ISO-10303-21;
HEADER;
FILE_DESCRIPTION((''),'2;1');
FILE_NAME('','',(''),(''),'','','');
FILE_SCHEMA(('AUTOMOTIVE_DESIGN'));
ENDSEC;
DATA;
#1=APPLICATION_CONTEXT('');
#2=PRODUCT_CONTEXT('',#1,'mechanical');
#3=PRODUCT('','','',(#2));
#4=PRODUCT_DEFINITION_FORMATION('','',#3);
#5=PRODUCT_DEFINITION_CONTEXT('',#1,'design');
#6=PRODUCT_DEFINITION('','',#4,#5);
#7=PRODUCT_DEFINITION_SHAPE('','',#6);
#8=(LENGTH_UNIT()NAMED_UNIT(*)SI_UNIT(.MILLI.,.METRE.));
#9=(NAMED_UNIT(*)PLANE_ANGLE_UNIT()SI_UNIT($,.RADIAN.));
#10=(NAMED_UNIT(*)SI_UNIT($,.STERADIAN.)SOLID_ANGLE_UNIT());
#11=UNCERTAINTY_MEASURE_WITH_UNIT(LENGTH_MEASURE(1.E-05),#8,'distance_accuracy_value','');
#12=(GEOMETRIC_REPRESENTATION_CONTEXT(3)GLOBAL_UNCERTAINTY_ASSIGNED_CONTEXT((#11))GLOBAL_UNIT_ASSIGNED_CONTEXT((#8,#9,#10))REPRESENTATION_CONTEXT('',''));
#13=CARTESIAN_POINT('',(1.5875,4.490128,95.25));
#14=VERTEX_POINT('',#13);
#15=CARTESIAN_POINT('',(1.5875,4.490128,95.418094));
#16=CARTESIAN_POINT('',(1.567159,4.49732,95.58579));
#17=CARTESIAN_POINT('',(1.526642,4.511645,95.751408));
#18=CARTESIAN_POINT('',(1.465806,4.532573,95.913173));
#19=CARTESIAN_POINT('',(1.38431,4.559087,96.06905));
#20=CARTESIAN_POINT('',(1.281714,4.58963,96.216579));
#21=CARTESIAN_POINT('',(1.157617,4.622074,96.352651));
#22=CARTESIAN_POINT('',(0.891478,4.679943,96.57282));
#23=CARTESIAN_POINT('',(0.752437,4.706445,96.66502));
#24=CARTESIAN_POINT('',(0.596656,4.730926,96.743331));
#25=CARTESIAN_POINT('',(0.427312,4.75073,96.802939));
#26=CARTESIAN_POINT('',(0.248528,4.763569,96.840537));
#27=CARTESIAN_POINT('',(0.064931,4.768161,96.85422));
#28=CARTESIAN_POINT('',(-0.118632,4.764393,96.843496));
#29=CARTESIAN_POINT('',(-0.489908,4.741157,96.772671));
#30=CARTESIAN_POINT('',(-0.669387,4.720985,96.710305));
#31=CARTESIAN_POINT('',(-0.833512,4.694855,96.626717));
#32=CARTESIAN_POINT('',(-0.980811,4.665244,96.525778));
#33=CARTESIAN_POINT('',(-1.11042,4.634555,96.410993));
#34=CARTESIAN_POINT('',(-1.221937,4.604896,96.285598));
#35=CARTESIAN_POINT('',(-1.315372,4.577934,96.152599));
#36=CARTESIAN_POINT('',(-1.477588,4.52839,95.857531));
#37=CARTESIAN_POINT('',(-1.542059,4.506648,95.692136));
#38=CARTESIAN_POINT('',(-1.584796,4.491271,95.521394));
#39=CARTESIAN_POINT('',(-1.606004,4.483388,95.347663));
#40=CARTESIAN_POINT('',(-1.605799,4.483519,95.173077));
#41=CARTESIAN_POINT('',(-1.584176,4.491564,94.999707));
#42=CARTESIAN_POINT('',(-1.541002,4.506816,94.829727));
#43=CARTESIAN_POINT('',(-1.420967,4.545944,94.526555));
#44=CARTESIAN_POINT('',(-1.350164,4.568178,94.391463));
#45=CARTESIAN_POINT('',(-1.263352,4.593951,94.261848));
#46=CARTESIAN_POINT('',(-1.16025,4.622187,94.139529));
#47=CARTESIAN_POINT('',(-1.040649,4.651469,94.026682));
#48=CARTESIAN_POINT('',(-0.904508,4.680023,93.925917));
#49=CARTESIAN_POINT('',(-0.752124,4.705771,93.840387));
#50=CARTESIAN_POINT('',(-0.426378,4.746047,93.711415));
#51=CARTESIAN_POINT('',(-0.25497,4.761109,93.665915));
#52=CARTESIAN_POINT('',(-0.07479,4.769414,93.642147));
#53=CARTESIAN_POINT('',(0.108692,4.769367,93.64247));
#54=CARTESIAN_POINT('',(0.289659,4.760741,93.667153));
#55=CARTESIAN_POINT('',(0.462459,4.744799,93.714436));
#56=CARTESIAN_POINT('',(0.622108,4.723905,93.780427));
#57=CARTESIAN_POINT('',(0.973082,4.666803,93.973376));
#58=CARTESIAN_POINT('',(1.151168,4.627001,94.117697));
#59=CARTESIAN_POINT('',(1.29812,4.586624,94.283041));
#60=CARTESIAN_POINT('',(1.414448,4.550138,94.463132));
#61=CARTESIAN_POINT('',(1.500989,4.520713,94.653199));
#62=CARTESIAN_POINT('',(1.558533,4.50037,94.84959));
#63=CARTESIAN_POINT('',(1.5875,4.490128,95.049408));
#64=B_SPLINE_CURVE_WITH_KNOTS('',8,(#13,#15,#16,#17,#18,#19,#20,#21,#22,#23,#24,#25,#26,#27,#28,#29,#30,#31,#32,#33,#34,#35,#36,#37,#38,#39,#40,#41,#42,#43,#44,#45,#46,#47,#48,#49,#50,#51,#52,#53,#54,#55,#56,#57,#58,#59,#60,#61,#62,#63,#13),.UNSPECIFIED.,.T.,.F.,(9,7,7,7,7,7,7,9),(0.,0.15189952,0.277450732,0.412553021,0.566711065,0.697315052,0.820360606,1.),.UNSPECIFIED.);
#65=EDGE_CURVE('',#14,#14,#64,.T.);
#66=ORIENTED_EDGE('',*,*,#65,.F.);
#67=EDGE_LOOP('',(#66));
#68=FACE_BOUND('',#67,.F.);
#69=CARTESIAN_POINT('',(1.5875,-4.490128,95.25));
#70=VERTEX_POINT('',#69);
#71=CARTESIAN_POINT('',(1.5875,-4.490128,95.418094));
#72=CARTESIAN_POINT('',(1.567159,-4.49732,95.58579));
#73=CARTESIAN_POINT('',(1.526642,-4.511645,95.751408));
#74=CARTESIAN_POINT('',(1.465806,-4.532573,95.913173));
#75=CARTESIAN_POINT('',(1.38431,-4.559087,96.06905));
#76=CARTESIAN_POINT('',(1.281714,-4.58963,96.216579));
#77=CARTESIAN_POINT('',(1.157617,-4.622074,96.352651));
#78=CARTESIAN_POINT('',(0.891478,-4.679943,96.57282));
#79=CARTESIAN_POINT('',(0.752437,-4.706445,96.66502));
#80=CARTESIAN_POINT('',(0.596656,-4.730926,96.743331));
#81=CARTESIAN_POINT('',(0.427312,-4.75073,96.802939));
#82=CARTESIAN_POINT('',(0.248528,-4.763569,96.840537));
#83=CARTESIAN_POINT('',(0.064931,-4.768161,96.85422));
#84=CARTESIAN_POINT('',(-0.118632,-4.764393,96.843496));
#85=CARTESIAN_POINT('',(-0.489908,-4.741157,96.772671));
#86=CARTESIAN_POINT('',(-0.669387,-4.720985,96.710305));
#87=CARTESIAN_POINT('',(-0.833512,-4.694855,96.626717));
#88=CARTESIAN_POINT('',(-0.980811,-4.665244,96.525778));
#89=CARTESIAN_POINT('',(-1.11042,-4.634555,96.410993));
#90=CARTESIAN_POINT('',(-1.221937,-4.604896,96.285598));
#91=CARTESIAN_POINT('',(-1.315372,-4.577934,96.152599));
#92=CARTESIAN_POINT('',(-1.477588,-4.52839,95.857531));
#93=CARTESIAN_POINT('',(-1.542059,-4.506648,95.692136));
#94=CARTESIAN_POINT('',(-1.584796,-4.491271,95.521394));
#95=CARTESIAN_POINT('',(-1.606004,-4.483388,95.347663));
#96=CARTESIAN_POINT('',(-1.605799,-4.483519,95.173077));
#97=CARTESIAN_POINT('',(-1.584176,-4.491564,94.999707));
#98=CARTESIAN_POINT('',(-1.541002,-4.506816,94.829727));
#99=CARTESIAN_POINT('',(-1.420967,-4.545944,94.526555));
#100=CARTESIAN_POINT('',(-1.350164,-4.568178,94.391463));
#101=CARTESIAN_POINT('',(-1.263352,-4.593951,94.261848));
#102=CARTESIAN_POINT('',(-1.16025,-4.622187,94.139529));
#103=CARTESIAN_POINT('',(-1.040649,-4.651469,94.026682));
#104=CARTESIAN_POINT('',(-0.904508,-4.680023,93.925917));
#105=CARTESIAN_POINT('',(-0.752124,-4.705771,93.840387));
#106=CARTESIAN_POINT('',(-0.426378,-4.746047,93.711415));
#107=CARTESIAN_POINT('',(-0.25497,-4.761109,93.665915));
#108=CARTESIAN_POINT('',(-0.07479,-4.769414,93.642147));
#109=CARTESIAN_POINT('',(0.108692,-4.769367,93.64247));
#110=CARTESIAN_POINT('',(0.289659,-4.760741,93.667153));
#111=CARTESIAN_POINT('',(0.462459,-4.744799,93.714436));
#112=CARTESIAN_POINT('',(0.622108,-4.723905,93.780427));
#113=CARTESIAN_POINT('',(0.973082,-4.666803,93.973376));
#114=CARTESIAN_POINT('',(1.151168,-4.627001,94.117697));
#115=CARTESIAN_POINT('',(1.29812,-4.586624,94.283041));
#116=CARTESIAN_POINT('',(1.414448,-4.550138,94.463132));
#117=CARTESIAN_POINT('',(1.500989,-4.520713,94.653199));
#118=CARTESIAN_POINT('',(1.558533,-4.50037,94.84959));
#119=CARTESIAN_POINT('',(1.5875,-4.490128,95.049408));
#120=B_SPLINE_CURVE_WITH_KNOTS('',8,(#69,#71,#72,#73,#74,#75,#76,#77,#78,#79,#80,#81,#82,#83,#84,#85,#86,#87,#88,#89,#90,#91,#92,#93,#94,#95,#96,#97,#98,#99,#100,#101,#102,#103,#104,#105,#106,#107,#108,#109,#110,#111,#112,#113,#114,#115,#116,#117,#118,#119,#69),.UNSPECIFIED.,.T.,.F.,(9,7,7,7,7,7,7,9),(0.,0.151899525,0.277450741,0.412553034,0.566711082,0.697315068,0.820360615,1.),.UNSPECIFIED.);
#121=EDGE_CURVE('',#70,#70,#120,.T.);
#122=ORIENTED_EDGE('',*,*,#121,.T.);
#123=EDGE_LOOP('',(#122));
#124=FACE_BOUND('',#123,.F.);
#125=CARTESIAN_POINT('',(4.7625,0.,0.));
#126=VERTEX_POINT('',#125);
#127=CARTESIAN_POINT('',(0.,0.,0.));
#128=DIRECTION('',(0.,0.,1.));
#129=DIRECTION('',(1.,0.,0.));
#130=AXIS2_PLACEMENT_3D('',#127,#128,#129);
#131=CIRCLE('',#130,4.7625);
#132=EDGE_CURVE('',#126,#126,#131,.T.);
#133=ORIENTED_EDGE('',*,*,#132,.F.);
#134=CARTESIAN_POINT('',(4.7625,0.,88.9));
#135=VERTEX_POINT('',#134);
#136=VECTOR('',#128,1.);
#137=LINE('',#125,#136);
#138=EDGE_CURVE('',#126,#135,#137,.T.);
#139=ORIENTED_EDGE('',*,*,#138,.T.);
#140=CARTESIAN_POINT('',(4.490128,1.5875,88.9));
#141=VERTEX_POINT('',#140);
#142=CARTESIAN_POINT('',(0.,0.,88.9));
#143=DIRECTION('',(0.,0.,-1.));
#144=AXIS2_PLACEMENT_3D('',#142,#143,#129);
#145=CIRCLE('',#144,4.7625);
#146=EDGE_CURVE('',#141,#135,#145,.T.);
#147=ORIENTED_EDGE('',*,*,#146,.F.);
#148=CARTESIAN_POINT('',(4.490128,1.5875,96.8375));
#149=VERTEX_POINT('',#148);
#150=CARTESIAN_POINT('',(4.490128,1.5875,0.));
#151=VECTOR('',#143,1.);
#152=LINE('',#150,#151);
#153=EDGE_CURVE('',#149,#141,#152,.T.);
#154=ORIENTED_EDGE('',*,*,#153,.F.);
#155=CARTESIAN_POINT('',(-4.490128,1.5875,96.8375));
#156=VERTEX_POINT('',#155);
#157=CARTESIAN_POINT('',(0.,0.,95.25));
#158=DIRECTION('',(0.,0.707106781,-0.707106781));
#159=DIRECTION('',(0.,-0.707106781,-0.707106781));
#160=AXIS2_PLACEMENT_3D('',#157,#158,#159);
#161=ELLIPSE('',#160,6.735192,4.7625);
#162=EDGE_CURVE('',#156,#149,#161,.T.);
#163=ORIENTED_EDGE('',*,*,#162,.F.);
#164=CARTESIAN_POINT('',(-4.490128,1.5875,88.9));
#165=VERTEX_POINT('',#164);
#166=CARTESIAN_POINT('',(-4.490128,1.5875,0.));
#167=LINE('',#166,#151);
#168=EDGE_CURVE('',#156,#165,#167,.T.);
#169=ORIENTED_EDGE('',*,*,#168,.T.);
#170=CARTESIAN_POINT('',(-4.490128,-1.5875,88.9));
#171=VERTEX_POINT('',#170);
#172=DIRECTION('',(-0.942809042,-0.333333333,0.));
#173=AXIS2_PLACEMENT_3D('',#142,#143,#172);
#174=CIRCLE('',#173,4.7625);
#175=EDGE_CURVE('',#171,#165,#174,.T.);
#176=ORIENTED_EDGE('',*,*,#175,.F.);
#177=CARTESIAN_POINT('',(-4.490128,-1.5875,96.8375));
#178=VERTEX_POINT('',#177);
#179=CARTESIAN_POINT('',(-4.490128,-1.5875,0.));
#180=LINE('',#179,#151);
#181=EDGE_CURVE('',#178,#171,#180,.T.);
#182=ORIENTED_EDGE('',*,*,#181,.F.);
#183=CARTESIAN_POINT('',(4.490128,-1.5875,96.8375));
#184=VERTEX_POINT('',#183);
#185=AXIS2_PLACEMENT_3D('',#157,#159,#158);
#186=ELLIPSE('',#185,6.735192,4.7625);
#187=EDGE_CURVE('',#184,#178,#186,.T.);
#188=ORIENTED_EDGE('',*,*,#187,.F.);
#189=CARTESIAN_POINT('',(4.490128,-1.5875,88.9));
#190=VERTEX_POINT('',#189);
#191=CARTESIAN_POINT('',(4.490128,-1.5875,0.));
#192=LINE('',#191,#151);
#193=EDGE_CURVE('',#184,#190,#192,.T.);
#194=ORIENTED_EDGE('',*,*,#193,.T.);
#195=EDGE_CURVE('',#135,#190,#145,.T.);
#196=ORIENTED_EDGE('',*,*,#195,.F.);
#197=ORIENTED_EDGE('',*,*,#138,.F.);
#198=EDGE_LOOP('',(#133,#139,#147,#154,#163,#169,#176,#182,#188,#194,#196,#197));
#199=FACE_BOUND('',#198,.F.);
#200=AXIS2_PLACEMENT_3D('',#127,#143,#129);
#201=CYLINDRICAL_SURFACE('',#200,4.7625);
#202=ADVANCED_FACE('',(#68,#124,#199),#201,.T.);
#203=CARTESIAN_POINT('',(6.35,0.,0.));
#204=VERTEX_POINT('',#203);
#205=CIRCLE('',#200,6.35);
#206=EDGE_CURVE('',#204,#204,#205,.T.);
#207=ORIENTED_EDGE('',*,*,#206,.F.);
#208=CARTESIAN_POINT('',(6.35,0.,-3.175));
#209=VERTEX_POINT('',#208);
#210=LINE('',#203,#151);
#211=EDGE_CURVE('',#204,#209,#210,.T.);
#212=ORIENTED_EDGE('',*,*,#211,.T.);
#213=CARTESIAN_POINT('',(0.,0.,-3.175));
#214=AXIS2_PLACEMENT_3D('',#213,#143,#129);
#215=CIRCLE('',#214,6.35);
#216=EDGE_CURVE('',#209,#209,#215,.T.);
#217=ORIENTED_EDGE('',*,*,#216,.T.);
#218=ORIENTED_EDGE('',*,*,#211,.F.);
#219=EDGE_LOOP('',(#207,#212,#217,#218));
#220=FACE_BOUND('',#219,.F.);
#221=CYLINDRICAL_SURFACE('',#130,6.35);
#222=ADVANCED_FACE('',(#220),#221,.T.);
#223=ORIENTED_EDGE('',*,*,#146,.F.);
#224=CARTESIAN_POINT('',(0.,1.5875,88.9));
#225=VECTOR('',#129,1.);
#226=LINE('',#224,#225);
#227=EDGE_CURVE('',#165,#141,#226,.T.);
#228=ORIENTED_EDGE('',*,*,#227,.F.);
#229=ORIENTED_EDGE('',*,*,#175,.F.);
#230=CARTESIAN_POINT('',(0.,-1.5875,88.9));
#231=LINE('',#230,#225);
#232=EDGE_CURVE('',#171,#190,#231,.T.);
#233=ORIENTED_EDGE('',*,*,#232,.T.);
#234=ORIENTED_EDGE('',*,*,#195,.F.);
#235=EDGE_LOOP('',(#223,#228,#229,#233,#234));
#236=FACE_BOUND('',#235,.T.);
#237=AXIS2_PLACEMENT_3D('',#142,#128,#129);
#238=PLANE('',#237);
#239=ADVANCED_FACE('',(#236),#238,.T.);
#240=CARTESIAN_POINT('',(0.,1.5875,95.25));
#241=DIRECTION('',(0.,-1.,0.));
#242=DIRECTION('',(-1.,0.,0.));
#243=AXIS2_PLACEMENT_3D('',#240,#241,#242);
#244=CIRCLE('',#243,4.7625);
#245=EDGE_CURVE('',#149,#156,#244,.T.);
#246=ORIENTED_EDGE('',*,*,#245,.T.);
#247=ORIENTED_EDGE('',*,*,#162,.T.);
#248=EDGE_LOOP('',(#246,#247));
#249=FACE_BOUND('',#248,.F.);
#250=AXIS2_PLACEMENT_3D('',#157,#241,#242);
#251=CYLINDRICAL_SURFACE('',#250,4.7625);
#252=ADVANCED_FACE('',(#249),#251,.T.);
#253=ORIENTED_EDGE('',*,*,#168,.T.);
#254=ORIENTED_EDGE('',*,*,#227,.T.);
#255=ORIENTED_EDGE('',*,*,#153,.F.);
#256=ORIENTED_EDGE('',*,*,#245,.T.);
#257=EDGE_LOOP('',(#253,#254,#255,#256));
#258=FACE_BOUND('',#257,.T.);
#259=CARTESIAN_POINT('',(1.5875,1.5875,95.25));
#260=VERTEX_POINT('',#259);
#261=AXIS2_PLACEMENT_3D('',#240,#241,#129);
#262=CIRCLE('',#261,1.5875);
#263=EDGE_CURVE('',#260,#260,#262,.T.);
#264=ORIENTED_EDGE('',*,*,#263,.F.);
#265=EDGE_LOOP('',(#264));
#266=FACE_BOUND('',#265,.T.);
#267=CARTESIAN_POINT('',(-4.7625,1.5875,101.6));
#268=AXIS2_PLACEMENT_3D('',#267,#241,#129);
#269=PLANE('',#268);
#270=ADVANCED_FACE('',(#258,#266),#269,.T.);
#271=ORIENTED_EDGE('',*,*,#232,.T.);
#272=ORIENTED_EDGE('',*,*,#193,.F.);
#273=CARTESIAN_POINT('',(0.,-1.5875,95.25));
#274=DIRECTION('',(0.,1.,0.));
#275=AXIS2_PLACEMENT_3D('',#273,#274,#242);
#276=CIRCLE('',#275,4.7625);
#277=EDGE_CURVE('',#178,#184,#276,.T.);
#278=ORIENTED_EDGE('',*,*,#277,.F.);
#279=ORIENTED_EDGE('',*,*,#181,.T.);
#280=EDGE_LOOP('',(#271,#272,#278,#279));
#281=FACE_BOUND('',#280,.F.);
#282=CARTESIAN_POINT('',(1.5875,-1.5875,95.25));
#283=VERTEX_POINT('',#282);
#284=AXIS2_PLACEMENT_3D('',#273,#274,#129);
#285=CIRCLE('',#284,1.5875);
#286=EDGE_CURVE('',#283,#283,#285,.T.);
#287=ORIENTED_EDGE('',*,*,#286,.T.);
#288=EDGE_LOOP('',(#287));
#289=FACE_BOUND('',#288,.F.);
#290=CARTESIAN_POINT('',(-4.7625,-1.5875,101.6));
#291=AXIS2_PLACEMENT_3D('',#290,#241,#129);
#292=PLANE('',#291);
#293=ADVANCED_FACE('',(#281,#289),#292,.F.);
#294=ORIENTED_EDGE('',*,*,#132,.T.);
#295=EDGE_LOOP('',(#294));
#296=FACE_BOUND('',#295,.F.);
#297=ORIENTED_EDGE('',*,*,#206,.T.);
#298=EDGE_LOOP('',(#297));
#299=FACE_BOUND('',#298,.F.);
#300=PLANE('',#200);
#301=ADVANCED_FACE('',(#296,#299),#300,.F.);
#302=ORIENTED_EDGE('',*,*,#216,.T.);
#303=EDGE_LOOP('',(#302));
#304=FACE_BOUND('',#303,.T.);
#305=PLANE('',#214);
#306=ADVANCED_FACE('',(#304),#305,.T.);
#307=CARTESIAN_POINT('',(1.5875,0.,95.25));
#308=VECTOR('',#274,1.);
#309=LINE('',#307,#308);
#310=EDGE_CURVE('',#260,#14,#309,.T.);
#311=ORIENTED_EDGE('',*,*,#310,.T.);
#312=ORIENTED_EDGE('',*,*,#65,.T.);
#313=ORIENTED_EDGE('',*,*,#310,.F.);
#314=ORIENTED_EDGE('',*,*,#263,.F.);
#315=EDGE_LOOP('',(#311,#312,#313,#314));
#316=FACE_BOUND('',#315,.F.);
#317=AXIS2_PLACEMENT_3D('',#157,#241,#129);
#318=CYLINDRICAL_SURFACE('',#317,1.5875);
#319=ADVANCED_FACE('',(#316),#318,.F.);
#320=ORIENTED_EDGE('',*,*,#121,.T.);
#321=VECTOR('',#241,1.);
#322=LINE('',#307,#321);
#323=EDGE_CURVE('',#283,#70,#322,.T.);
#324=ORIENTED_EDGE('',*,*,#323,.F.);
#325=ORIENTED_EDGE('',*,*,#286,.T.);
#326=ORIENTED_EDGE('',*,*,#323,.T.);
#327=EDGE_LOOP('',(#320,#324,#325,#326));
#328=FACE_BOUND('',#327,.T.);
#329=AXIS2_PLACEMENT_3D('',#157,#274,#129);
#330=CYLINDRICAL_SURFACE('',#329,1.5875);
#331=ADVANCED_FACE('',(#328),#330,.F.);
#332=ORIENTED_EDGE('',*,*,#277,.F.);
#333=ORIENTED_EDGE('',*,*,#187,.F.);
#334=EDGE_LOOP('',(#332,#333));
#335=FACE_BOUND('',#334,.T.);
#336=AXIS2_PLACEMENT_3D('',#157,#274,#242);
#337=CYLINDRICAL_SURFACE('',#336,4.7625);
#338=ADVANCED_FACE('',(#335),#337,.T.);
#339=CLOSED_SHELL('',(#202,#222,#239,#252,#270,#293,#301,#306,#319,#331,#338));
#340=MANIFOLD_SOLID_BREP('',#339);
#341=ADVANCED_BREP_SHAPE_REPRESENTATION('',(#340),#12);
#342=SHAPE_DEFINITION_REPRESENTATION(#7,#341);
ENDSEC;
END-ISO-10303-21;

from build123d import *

# Parameters (mm, degrees)
F0_R          = 4.7625
F1_DEPTH      = 101.6
F2_W          = 9.525
F2_H          = 3.175
F3_DEPTH      = 12.7
F4_R          = 1.5875
F5_DEPTH      = 151
F5_DEPTH_BACK = 151
F6_R          = 6.35
F7_DEPTH      = 3.175


# Not quite as in the source:
# - an extrude ends at something that could not be found from the text; its depth is read off the source's solid


with BuildPart() as f1:
    # F0 (on Top) → F1 (new body)
    with BuildSketch(Plane.XY):
        Circle(F0_R)
    extrude(amount=F1_DEPTH)

    # F2 (on face) → F3 (cut)
    with BuildSketch(Plane.XY.offset(101.6)):
        Rectangle(F2_W, F2_H)
    extrude(amount=-F3_DEPTH, mode=Mode.SUBTRACT)

    # F4 (on Front) → F5 (cut, two sides)
    with BuildSketch(Plane.XZ) as f5_sk:
        with BuildLine():
            Line((4.7625, 101.6), (-4.7625, 101.6))
            Line((-4.7625, 101.6), (-4.7625, 95.25))
            ThreePointArc((-4.7625, 95.25), (0, 100.0125), (4.7625, 95.25))
            Line((4.7625, 95.25), (4.7625, 101.6))
        make_face()
        with Locations((0, 95.25)):
            Circle(F4_R)
    extrude(amount=-F5_DEPTH, mode=Mode.SUBTRACT)
    extrude(f5_sk.sketch, amount=F5_DEPTH_BACK, mode=Mode.SUBTRACT)

    # F6 (on face) → F7 (join)
    with BuildSketch(Plane(origin=(0, 0, 0), x_dir=(1, 0, 0), z_dir=(0, 0, -1))):
        Circle(F6_R)
    extrude(amount=F7_DEPTH)


solid = f1.part
